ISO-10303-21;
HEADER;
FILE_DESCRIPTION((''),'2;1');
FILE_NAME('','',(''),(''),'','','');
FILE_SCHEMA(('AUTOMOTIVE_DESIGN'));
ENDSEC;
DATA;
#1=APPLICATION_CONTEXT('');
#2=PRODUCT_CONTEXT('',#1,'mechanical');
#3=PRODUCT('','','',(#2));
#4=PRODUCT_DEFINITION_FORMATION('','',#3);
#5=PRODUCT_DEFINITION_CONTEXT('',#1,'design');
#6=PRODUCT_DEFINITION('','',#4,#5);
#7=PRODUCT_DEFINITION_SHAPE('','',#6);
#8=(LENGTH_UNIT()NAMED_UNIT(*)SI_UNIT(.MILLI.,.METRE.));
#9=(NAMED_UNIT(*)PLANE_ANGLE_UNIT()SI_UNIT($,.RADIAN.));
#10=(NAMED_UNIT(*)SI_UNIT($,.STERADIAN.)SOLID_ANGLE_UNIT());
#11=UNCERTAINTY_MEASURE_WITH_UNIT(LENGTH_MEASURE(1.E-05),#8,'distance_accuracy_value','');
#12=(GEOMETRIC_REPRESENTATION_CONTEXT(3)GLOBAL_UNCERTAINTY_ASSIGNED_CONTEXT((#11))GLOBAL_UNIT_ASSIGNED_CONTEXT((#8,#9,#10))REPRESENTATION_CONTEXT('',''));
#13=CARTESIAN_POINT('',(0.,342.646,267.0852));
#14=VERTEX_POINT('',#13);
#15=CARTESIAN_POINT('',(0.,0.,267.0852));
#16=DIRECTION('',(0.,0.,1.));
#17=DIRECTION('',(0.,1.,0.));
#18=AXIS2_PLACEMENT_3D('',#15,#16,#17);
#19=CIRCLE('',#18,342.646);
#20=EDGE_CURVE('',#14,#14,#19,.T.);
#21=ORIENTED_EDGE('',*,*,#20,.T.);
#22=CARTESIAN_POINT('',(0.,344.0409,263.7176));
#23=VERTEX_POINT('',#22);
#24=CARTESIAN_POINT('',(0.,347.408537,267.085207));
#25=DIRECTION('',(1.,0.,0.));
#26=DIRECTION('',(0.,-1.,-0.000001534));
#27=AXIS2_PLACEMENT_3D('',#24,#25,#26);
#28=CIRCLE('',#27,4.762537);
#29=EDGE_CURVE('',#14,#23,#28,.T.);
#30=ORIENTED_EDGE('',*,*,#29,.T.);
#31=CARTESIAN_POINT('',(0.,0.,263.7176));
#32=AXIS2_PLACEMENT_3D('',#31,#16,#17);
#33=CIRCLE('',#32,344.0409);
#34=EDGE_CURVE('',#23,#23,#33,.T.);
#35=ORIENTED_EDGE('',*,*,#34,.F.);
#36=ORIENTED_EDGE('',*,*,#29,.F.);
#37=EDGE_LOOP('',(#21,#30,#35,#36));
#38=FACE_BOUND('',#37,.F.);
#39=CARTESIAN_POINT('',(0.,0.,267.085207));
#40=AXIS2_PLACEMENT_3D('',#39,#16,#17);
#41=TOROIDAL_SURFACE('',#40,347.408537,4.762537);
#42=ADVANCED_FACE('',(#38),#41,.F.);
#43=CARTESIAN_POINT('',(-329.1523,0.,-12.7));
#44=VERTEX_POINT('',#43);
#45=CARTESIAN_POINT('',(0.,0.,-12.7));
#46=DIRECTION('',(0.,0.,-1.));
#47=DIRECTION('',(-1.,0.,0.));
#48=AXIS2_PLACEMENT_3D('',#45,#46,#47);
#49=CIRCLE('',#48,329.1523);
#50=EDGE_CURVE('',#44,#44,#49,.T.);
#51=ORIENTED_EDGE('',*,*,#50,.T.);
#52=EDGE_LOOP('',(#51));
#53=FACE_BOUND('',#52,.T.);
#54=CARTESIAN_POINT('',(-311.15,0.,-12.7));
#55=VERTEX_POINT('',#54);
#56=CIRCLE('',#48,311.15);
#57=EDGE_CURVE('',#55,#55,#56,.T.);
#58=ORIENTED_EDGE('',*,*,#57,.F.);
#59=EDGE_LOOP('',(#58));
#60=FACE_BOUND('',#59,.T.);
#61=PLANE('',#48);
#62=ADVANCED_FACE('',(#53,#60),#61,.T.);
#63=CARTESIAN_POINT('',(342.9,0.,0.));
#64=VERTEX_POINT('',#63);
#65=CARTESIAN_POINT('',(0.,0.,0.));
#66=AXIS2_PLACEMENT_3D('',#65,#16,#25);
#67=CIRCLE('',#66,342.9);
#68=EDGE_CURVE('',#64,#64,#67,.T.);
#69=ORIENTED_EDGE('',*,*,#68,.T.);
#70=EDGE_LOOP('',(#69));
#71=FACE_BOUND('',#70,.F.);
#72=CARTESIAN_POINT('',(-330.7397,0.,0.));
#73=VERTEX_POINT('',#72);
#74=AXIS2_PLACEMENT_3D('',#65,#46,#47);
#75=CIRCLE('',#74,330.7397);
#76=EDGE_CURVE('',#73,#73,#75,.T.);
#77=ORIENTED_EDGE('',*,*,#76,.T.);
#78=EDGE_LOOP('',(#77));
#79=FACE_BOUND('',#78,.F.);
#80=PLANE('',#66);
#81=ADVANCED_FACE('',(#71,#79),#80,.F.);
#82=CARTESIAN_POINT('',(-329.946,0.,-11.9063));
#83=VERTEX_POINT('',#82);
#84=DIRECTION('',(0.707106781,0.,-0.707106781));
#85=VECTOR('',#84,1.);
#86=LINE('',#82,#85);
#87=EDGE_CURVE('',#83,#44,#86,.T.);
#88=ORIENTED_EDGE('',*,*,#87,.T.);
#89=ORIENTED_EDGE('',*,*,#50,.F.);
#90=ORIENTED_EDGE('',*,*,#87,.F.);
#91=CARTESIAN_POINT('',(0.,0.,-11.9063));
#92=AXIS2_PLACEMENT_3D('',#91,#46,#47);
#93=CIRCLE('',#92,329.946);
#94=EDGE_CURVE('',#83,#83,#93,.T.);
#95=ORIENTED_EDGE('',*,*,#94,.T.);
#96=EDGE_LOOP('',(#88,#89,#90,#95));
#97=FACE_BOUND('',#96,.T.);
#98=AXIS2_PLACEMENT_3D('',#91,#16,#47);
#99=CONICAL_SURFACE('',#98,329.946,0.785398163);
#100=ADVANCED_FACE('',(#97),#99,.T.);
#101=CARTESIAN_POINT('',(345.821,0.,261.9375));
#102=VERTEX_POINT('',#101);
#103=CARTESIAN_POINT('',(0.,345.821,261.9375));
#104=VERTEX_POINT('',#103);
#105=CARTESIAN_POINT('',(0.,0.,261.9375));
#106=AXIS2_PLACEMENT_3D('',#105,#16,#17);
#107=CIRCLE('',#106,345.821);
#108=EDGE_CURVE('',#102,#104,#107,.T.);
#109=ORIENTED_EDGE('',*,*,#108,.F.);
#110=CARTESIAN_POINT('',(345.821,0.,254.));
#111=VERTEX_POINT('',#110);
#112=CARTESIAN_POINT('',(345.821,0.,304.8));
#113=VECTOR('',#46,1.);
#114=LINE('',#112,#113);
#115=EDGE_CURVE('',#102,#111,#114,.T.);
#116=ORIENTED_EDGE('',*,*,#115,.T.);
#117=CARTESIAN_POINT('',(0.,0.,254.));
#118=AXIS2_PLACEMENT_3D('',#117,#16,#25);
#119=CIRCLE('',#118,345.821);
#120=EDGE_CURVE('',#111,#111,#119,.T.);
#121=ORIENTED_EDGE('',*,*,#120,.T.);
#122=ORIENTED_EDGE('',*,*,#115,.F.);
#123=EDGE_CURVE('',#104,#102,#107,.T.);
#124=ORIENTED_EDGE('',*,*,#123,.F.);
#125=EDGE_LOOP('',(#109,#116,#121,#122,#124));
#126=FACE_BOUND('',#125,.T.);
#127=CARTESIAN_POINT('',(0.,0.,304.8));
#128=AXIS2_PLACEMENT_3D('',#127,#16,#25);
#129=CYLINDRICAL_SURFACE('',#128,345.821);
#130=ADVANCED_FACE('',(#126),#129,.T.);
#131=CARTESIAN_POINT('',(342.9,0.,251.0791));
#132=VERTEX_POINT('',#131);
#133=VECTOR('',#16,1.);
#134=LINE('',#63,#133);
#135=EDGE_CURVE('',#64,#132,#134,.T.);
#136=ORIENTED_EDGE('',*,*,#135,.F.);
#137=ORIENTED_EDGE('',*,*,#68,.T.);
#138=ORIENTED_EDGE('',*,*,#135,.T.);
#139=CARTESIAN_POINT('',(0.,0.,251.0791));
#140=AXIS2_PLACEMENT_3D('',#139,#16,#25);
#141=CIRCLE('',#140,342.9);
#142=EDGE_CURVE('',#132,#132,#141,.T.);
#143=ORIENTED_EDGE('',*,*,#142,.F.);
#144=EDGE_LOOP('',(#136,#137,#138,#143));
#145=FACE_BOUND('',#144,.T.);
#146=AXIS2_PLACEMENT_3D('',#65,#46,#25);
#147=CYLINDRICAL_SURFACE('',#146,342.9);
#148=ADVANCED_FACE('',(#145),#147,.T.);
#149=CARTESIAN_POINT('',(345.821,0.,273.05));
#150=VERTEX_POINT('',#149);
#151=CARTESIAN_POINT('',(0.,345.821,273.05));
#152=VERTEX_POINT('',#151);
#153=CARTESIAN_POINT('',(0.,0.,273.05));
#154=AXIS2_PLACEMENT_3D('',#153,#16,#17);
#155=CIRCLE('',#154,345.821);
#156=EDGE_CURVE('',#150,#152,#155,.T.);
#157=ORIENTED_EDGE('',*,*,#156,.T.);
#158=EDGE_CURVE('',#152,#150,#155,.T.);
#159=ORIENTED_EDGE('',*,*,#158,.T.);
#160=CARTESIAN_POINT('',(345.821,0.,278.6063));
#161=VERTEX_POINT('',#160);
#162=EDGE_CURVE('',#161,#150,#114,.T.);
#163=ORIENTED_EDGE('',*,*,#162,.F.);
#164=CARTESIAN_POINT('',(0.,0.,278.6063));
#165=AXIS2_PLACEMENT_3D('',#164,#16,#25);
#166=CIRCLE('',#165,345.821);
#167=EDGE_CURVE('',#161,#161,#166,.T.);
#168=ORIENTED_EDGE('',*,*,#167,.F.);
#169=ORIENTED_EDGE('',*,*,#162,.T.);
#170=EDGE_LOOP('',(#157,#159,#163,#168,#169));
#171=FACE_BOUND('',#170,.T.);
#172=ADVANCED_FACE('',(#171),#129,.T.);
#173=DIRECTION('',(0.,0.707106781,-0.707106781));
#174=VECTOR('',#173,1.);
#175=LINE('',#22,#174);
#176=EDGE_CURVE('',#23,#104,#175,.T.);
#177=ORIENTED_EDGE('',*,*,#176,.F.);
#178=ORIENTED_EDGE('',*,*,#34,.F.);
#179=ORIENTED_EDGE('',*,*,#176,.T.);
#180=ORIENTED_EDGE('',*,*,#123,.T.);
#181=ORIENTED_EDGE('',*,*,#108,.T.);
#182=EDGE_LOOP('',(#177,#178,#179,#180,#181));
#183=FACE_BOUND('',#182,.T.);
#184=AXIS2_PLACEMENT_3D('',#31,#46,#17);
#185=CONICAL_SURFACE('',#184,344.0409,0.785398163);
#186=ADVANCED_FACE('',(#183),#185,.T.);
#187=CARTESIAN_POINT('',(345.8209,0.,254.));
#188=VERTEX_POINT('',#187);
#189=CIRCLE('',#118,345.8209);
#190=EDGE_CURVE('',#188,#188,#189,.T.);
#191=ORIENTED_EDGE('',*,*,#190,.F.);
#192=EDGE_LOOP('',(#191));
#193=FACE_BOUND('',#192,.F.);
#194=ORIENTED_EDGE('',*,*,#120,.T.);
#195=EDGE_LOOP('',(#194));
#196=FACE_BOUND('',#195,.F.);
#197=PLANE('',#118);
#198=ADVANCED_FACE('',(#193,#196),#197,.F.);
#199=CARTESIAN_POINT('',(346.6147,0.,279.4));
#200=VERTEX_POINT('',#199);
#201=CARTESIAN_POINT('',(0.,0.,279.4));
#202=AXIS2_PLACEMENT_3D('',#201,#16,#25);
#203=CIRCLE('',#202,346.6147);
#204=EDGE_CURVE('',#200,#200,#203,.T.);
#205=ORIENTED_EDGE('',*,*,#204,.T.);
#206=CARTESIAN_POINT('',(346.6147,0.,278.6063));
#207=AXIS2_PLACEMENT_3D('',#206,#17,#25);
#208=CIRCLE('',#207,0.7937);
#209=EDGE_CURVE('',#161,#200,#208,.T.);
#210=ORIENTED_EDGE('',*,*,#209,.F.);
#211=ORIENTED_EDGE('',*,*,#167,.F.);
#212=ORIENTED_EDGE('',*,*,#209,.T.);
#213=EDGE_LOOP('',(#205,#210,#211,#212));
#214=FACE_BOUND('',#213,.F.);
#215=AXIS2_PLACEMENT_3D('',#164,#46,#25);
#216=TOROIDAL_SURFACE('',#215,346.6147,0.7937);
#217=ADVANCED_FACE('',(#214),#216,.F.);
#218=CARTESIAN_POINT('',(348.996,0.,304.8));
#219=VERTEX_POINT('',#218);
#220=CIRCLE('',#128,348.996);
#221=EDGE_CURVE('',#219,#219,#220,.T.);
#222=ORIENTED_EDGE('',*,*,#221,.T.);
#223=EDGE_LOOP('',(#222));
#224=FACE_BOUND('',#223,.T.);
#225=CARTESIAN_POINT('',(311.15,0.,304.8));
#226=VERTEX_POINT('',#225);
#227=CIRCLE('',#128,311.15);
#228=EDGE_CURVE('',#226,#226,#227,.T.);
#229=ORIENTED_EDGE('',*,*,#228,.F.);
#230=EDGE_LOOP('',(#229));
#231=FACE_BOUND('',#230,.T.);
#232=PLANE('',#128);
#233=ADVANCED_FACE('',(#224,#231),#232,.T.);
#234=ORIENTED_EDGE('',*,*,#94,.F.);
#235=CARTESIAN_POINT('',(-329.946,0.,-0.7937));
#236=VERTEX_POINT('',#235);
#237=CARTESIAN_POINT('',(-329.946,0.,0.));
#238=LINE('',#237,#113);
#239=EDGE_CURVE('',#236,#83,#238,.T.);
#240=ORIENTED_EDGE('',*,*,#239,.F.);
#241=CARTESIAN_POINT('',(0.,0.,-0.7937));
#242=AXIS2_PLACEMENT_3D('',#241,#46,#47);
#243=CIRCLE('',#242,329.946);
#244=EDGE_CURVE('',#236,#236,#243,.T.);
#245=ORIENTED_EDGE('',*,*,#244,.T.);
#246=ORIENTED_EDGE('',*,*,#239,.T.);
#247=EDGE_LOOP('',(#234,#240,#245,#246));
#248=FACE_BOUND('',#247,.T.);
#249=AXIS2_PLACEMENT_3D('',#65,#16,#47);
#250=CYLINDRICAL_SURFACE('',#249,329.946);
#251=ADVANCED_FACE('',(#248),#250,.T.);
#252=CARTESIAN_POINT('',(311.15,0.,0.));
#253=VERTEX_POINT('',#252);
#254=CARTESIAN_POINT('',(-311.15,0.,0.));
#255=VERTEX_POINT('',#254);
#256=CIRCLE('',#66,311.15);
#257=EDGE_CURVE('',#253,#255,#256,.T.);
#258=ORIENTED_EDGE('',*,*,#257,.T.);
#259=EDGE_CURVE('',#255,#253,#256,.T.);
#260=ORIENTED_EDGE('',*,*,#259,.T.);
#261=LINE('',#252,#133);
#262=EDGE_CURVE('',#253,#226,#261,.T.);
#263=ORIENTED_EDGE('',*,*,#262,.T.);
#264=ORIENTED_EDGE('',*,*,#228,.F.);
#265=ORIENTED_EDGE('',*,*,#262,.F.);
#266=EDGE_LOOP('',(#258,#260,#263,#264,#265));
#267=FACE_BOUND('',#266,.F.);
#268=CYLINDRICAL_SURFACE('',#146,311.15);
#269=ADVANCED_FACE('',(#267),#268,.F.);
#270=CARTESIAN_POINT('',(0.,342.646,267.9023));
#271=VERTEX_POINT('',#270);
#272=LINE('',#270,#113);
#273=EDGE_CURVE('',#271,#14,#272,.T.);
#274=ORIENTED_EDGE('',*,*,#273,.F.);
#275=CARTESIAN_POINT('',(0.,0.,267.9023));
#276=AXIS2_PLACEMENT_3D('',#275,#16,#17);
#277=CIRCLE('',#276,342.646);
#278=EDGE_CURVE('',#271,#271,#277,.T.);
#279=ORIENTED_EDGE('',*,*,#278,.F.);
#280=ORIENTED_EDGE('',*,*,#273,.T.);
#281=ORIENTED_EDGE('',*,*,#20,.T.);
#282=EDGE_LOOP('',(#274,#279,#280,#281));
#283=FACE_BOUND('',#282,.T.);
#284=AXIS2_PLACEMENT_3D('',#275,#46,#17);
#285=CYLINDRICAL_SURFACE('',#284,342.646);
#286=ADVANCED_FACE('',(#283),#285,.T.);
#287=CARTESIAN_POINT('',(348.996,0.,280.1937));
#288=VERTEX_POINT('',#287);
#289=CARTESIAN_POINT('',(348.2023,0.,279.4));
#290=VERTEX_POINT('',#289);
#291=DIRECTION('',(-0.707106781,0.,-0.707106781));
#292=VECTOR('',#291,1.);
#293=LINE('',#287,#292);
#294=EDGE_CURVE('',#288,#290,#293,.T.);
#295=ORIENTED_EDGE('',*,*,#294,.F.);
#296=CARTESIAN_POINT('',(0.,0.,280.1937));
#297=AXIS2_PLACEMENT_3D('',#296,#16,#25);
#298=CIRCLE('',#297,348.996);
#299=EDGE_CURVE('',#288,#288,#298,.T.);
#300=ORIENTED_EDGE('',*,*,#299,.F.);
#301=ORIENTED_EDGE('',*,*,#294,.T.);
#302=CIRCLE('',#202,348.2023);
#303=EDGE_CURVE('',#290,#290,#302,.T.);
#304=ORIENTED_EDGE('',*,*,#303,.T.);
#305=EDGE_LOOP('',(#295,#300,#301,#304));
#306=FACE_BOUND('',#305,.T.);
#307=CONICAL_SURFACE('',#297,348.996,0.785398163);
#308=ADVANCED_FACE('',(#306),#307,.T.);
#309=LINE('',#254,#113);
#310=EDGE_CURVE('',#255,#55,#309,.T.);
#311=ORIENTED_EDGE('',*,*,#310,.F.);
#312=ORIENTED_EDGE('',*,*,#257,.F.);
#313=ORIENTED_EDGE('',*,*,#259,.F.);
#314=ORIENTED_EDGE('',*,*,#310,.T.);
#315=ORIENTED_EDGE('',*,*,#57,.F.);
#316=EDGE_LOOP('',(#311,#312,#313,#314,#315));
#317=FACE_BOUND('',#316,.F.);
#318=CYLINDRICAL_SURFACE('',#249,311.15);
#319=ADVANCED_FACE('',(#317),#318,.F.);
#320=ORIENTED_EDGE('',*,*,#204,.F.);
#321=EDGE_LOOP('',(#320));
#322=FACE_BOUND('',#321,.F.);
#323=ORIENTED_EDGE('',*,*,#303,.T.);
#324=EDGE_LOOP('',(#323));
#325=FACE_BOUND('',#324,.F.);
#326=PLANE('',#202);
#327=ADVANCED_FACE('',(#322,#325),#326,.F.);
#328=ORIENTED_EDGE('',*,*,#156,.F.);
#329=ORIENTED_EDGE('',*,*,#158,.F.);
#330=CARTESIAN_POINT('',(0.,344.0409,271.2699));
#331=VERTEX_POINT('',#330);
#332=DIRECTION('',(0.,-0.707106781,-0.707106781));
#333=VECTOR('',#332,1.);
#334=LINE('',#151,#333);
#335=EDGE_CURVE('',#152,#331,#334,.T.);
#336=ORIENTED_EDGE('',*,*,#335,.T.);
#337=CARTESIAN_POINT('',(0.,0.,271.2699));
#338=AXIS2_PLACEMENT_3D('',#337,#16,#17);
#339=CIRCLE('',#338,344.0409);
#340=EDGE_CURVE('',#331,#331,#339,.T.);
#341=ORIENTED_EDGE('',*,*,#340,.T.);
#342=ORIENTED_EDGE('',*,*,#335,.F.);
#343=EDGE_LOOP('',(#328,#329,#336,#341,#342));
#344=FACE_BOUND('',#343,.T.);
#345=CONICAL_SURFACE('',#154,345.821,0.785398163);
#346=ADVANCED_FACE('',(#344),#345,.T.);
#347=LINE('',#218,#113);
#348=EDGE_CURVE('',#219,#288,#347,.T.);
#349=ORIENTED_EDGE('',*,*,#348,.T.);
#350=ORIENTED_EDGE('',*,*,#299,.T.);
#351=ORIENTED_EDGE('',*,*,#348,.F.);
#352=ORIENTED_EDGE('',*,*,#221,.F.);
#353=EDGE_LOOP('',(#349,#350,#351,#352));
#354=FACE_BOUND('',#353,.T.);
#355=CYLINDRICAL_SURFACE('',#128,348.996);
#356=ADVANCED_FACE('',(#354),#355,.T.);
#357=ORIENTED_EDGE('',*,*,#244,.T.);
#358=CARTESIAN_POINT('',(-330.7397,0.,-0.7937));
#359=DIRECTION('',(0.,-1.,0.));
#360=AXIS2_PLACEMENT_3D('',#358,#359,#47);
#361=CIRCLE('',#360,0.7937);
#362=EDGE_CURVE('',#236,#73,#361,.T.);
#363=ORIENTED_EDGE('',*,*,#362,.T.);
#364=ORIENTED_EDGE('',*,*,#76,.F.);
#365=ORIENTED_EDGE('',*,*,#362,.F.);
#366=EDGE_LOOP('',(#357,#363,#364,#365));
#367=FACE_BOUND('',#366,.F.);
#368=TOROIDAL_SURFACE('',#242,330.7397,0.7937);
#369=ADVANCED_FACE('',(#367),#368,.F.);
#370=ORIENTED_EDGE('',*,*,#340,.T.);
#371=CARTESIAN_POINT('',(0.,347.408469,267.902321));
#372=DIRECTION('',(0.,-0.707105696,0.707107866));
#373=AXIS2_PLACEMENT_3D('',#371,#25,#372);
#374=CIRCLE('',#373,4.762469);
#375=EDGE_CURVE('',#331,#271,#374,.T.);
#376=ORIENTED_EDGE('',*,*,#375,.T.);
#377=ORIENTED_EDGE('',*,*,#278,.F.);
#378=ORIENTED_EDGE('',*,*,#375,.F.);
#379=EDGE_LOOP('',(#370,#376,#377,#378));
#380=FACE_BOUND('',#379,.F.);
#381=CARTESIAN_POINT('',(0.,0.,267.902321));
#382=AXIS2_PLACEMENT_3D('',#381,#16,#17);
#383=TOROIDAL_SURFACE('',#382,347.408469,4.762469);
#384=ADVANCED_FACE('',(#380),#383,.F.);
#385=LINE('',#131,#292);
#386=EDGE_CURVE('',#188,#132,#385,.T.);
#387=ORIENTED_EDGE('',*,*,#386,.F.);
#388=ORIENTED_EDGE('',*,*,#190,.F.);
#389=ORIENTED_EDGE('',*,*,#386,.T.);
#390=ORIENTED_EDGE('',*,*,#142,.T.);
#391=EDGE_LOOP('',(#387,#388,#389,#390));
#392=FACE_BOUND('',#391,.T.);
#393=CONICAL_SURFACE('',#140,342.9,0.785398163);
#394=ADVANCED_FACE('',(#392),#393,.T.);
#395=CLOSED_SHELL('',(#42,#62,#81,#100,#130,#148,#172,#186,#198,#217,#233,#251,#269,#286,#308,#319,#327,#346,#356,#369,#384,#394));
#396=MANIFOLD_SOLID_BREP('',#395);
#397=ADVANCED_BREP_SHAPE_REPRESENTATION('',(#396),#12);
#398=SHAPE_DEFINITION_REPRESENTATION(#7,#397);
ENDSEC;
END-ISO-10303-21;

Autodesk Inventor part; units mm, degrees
ref_plane "YZ Plane" through (0, 0, 0) normal (1, 0, 0) x (0, 1, 0)
ref_plane "XZ Plane" through (0, 0, 0) normal (0, 1, 0) x (-1, 0, 0)
ref_plane "XY Plane" through (0, 0, 0) normal (0, 0, 1) x (1, 0, 0)
sketch "Sketch1" plane through (0, 0, 0) normal (0, 0, 1) x (1, 0, 0)
  circle A0 centre (0, 0) radius 311.15
  circle A1 centre (0, 0) radius 342.9
  dimension "d0" = 622.3
  dimension "d1" = 685.8
extrude "Extrusion1" add sketch "Sketch1" along normal blind 304.8
sketch "Sketch2" plane through (0, 0, 304.8) normal (0, 0, 1) x (1, 0, 0)
  circle A0 centre (0, 0) radius 342.9 projected
  circle A1 centre (0, 0) radius 345.821
  circle A2 centre (0, 0) radius 348.996
  dimension "d4" = 691.642
  dimension "d5" = 697.992
extrude "Extrusion2" add sketch "Sketch2" against normal blind 50.8 contours A1
extrude "Extrusion3" add sketch "Sketch2" against normal blind 25.4 contours A2
chamfer "Chamfer1" distance 2.921 angle 45 1 edges at (-342.9, 0, 254)
sketch "Sketch3" plane through (0, 0, 0) normal (0, 0, -1) x (-1, 0, 0)
  circle A0 centre (0, 0) radius 329.946
  circle A1 centre (0, 0) radius 311.15 projected
  dimension "d13" = 659.892
extrude "Extrusion4" add sketch "Sketch3" along normal blind 12.7
fillet "Fillet1" radius 0.7937 2 edges at (329.946, 0, 0) (-345.821, 0, 279.4)
chamfer "Chamfer2" distance 0.7937 angle 45 1 edges at (329.946, 0, -12.7)
chamfer "Chamfer3" distance 0.7937 angle 45 1 edges at (-348.996, 0, 279.4)
sketch "Sketch4" plane through (0, 0, 0) normal (1, 0, 0) x (0, 1, 0)
  line L0 (345.821, 278.6062) -> (345.821, 254) construction
  line L1 (-348.996, 304.8) -> (348.996, 304.8) construction
  line L2 (345.821, 273.05) -> (344.0409, 271.2699)
  arc A0 (344.0409, 271.2699) -> (342.646, 267.9023) centre (347.4085, 267.9023) ccw
  line L3 (342.646, 267.9023) -> (342.646, 267.0852)
  arc A1 (342.646, 267.0852) -> (344.0409, 263.7176) centre (347.4085, 267.0852) ccw
  line L4 (344.0409, 263.7176) -> (345.821, 261.9375)
  line L5 (345.821, 261.9375) -> (345.821, 273.05)
  line L6 (0, -60.96) -> (0, 365.76) projected
  point P0 (0, 0)
  dimension "d23" = 11.1125
  dimension "d24" = 3.175
  dimension "d25" = 4.7625
  dimension "d26" = 31.75
  dimension "d27" = 45
revolve "Revolution1" cut sketch "Sketch4" angle 360 about axis through (0, 0, -10) along (0, 0, 1)
equation "\"d10\" = -0.5 * d1 + 0.5 * d4"
properties part number "A1-19037-300-06 HCWI liner - pup" material "Iron, HCWI"
